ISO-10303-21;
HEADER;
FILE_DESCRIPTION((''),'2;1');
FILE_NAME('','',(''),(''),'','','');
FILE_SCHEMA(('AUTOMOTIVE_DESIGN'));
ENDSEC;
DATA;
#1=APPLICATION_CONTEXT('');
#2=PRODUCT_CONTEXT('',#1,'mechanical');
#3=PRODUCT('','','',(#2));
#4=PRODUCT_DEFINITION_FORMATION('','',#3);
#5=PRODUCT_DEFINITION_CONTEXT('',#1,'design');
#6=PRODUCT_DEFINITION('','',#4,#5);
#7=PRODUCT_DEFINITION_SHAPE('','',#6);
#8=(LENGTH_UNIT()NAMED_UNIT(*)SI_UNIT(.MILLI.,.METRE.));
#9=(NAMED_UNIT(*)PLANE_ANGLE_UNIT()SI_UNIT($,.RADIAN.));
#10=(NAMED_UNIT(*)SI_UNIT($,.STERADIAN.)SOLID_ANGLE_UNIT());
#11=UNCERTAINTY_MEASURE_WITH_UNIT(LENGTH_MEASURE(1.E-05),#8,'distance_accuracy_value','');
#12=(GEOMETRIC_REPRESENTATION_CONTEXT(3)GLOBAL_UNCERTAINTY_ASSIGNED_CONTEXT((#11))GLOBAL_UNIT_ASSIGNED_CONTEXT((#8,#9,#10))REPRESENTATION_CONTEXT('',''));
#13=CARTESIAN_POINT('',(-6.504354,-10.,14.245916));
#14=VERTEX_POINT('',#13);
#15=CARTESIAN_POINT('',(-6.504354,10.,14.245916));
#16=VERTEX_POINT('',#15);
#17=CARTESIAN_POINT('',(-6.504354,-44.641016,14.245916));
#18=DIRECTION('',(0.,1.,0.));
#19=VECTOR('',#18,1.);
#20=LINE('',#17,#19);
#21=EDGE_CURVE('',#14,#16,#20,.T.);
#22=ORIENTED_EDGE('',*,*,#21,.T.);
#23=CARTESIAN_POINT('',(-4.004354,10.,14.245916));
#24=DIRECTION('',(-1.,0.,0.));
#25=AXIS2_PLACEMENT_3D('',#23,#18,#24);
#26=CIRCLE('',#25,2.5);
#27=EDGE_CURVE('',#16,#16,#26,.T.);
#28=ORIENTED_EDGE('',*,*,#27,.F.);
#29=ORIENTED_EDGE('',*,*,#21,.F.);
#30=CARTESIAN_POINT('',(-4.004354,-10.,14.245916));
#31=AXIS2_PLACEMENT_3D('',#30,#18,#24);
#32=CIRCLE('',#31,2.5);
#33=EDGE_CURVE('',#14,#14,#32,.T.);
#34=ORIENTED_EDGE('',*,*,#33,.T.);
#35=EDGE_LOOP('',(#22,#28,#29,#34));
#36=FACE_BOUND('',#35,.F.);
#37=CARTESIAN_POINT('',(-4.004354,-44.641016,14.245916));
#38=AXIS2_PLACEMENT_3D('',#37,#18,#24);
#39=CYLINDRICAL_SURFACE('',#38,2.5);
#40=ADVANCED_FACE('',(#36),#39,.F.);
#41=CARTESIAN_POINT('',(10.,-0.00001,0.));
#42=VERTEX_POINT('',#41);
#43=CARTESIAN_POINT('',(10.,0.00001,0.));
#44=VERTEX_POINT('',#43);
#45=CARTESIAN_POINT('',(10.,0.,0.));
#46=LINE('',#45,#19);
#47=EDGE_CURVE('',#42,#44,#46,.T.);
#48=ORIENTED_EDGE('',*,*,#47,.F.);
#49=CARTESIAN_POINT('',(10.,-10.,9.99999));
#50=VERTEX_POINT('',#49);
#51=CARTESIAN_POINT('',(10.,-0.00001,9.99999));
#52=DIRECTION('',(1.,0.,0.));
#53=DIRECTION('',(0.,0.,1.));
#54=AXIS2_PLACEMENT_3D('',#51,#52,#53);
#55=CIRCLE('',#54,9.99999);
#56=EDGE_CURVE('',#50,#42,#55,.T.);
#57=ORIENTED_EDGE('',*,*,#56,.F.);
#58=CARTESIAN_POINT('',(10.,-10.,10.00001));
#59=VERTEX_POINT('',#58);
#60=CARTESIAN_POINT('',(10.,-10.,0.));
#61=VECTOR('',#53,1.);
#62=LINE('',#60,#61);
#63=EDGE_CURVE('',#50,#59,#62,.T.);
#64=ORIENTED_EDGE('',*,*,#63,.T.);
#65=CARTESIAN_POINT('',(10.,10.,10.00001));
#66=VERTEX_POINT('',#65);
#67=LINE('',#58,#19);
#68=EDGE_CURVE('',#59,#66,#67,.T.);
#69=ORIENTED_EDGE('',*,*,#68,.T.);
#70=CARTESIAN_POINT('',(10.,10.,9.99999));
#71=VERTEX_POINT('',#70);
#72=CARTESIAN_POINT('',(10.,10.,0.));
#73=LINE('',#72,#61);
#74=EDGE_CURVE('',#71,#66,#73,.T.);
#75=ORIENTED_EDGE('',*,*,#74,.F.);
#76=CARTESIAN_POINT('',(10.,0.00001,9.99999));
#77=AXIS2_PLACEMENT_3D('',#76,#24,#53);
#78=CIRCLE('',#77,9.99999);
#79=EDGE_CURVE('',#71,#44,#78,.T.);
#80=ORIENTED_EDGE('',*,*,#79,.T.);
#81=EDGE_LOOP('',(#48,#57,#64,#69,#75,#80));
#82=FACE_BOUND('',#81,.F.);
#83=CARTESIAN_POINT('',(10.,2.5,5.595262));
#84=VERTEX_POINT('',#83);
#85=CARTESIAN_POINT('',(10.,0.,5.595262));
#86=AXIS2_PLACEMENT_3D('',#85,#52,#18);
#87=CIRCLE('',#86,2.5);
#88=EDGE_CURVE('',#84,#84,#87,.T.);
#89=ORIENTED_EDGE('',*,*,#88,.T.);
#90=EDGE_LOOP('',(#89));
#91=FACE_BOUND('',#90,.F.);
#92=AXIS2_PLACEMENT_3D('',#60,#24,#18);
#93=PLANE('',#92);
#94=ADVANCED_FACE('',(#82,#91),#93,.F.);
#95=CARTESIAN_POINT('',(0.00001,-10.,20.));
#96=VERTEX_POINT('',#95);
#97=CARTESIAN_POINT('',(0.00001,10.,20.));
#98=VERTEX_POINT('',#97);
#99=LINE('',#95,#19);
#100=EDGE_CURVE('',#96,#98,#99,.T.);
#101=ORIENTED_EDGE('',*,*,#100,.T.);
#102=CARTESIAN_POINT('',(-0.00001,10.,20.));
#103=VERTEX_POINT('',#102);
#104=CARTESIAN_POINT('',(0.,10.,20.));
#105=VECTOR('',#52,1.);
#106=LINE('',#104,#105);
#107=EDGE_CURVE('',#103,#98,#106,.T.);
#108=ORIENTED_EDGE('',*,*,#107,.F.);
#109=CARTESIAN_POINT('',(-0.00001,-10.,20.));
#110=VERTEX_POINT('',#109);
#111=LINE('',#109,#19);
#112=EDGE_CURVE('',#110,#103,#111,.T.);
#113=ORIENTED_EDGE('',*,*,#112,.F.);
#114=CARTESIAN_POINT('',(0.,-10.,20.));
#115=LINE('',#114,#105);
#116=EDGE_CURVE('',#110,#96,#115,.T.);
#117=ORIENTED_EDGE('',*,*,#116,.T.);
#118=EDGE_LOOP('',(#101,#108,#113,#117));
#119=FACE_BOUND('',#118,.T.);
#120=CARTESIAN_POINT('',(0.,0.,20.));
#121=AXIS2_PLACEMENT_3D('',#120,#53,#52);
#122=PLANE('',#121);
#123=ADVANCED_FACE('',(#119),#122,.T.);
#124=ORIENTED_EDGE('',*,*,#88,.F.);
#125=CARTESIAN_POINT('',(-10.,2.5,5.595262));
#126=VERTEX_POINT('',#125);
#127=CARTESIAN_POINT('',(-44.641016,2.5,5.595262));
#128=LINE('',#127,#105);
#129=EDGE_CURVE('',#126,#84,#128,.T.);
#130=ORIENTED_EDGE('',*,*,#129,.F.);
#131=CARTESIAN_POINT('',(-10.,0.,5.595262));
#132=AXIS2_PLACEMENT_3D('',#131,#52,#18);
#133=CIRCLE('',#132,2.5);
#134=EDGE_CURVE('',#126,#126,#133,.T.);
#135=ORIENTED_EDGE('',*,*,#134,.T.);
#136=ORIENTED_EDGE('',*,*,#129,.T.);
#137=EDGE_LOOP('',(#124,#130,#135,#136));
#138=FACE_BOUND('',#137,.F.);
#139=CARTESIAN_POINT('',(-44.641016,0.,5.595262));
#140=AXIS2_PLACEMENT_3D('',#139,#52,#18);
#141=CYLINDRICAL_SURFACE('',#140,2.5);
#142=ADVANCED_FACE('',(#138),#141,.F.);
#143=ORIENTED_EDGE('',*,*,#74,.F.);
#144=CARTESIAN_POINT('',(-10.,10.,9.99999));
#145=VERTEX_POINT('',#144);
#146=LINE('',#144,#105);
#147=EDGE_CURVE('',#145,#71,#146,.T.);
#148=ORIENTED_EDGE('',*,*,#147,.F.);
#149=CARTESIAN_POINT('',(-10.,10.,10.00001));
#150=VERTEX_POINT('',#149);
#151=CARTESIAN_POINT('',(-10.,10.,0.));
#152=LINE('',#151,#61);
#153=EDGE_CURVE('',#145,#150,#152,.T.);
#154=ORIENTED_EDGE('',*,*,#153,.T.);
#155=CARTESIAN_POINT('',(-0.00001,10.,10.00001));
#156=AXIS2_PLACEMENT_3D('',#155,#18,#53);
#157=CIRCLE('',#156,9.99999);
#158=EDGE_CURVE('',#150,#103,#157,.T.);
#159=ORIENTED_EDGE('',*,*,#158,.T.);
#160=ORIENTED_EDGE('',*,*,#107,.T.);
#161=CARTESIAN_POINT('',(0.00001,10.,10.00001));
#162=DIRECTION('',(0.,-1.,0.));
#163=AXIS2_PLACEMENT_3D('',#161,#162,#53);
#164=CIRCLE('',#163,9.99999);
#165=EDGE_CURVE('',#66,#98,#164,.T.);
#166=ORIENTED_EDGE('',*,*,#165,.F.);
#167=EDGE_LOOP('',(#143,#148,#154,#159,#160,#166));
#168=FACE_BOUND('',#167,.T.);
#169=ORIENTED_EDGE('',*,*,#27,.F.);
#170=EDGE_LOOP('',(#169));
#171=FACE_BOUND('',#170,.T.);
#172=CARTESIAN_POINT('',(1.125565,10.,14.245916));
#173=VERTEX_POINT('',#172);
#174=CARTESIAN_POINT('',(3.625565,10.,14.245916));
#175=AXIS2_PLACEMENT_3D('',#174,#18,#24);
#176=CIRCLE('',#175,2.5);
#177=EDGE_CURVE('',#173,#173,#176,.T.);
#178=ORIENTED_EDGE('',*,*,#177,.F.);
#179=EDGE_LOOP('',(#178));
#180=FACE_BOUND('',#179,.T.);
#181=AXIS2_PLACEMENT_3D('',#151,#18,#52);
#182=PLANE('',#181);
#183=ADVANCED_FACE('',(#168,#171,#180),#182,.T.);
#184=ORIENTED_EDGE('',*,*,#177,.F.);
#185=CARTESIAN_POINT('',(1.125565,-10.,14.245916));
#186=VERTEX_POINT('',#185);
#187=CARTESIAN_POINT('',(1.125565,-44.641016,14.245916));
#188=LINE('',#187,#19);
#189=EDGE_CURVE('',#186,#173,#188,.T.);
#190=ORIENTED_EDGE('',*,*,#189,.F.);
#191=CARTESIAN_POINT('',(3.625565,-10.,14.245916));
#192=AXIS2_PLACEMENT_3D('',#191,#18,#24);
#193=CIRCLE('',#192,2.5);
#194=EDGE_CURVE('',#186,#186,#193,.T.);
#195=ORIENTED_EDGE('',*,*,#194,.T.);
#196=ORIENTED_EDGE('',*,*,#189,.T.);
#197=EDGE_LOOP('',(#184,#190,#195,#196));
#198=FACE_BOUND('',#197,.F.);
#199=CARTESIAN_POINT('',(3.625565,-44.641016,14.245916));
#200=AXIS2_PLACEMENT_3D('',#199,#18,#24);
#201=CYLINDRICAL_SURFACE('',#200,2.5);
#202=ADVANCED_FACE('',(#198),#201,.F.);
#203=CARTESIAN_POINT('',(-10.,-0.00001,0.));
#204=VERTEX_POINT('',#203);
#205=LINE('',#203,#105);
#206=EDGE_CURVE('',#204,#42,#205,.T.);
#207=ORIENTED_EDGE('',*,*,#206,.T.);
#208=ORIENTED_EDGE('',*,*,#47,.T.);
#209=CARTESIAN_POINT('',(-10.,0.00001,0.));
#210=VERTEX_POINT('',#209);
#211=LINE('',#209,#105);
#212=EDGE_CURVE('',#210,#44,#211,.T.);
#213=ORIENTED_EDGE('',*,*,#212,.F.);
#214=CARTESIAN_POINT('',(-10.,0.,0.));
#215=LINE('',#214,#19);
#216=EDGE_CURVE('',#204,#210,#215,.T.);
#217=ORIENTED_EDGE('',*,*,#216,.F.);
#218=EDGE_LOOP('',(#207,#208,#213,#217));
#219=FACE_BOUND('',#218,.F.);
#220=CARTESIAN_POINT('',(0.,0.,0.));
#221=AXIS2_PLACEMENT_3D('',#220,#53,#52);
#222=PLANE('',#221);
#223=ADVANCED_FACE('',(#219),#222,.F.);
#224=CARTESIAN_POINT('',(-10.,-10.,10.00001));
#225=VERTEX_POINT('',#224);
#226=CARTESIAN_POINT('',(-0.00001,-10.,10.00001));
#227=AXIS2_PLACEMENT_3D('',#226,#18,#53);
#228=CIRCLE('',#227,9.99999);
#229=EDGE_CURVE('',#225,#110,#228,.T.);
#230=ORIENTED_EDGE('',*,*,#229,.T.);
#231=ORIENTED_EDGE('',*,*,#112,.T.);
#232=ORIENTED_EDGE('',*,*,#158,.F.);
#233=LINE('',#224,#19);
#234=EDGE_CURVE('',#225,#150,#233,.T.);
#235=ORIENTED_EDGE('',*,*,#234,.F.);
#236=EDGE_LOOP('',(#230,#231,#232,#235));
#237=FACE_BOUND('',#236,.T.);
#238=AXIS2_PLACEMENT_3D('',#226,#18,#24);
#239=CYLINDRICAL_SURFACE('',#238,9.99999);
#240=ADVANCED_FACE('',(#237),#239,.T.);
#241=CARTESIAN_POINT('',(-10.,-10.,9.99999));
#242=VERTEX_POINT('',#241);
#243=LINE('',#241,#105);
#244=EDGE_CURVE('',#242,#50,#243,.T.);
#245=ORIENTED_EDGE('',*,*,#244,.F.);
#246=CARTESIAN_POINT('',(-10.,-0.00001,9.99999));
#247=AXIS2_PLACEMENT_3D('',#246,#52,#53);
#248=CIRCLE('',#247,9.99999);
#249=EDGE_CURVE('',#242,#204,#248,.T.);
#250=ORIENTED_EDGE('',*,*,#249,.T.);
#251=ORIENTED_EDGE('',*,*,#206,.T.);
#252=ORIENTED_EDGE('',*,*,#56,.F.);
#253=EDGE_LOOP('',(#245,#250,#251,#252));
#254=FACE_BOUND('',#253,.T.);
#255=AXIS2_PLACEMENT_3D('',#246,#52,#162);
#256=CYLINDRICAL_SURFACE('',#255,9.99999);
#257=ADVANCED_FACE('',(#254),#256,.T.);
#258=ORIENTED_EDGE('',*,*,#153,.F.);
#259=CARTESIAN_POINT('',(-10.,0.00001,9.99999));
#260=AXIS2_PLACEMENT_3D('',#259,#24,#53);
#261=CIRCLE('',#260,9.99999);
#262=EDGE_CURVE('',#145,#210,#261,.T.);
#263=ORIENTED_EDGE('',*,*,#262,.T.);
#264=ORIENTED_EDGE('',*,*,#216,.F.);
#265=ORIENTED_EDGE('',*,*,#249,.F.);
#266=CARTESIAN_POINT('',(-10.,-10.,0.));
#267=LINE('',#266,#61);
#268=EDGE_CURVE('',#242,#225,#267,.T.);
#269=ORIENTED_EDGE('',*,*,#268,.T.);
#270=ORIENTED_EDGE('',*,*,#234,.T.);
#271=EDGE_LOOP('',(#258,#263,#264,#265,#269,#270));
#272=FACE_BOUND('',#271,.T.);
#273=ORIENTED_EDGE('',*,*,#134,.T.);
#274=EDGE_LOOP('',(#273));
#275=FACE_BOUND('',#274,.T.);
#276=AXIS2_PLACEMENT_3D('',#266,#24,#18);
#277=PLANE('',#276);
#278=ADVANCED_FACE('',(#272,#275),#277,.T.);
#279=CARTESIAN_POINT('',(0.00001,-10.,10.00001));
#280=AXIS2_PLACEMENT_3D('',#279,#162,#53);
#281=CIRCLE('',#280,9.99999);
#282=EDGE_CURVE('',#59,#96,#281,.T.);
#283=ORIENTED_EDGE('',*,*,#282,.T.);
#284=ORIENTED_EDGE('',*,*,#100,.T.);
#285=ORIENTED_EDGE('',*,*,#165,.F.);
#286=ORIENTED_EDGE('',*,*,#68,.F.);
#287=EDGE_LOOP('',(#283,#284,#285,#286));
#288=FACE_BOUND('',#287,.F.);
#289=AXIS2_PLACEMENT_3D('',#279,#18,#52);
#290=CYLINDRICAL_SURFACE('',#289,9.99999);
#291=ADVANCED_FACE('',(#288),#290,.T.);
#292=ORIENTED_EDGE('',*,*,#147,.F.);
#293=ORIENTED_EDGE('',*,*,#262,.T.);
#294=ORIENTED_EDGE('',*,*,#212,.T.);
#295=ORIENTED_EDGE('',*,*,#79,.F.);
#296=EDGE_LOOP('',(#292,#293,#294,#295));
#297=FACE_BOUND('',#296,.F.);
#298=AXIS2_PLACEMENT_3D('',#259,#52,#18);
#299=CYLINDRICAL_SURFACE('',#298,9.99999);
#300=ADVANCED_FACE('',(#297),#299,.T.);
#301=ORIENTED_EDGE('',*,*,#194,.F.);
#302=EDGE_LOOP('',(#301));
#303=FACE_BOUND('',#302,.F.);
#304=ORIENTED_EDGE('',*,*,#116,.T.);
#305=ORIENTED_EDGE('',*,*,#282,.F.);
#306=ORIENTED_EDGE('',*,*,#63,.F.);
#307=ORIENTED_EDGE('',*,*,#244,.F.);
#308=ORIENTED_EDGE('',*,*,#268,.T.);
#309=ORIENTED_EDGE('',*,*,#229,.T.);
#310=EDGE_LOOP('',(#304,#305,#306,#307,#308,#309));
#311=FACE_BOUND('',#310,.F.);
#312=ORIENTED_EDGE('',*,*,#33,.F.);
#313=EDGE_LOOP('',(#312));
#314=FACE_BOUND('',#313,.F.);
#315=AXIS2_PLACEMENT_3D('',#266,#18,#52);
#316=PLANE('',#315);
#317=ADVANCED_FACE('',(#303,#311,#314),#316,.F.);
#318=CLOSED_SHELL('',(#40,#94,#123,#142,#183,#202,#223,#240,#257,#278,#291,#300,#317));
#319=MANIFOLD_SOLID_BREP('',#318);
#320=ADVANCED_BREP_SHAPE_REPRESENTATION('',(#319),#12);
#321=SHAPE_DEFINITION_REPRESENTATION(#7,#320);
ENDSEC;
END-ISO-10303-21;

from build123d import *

# Parameters (mm, degrees)
F0_W     = 20
F0_H     = 20
F1_DEPTH = 20
F2_R     = 9.99999
F5_D     = 5
F6_D     = 5


# Not quite as in the source:
# - a fillet or chamfer is up to 0.001 mm smaller than in the source, because OpenCascade refuses the exact size


with BuildPart() as f1:
    # F0 (on Top) → F1 (new body)
    with BuildSketch(Plane.XY):
        Rectangle(F0_W, F0_H)
    extrude(amount=F1_DEPTH)

    # F2 (radius 10 in the source; OpenCascade refuses exactly that, so slightly less here)
    f2_edges = [f1.edges().sort_by_distance(p)[0] for p in [
        (10, 0, 20),
        (-10, 0, 20),
        (0, -10, 0),
        (0, 10, 0),
    ]]
    fillet(f2_edges, radius=F2_R)

    # F5 (through all)
    with Locations(Plane(origin=(-10, 0, 0), x_dir=(0, -1, 0), z_dir=(-1, 0, 0))):
        with Locations((0, 5.5952616967)):
            Hole(F5_D / 2)

    # F6 (through all)
    with Locations(Plane.XZ.offset(10)):
        with Locations((-4.0043536574, 14.245916158), (3.62556451, 14.245916158)):
            Hole(F6_D / 2)


solid = f1.part
